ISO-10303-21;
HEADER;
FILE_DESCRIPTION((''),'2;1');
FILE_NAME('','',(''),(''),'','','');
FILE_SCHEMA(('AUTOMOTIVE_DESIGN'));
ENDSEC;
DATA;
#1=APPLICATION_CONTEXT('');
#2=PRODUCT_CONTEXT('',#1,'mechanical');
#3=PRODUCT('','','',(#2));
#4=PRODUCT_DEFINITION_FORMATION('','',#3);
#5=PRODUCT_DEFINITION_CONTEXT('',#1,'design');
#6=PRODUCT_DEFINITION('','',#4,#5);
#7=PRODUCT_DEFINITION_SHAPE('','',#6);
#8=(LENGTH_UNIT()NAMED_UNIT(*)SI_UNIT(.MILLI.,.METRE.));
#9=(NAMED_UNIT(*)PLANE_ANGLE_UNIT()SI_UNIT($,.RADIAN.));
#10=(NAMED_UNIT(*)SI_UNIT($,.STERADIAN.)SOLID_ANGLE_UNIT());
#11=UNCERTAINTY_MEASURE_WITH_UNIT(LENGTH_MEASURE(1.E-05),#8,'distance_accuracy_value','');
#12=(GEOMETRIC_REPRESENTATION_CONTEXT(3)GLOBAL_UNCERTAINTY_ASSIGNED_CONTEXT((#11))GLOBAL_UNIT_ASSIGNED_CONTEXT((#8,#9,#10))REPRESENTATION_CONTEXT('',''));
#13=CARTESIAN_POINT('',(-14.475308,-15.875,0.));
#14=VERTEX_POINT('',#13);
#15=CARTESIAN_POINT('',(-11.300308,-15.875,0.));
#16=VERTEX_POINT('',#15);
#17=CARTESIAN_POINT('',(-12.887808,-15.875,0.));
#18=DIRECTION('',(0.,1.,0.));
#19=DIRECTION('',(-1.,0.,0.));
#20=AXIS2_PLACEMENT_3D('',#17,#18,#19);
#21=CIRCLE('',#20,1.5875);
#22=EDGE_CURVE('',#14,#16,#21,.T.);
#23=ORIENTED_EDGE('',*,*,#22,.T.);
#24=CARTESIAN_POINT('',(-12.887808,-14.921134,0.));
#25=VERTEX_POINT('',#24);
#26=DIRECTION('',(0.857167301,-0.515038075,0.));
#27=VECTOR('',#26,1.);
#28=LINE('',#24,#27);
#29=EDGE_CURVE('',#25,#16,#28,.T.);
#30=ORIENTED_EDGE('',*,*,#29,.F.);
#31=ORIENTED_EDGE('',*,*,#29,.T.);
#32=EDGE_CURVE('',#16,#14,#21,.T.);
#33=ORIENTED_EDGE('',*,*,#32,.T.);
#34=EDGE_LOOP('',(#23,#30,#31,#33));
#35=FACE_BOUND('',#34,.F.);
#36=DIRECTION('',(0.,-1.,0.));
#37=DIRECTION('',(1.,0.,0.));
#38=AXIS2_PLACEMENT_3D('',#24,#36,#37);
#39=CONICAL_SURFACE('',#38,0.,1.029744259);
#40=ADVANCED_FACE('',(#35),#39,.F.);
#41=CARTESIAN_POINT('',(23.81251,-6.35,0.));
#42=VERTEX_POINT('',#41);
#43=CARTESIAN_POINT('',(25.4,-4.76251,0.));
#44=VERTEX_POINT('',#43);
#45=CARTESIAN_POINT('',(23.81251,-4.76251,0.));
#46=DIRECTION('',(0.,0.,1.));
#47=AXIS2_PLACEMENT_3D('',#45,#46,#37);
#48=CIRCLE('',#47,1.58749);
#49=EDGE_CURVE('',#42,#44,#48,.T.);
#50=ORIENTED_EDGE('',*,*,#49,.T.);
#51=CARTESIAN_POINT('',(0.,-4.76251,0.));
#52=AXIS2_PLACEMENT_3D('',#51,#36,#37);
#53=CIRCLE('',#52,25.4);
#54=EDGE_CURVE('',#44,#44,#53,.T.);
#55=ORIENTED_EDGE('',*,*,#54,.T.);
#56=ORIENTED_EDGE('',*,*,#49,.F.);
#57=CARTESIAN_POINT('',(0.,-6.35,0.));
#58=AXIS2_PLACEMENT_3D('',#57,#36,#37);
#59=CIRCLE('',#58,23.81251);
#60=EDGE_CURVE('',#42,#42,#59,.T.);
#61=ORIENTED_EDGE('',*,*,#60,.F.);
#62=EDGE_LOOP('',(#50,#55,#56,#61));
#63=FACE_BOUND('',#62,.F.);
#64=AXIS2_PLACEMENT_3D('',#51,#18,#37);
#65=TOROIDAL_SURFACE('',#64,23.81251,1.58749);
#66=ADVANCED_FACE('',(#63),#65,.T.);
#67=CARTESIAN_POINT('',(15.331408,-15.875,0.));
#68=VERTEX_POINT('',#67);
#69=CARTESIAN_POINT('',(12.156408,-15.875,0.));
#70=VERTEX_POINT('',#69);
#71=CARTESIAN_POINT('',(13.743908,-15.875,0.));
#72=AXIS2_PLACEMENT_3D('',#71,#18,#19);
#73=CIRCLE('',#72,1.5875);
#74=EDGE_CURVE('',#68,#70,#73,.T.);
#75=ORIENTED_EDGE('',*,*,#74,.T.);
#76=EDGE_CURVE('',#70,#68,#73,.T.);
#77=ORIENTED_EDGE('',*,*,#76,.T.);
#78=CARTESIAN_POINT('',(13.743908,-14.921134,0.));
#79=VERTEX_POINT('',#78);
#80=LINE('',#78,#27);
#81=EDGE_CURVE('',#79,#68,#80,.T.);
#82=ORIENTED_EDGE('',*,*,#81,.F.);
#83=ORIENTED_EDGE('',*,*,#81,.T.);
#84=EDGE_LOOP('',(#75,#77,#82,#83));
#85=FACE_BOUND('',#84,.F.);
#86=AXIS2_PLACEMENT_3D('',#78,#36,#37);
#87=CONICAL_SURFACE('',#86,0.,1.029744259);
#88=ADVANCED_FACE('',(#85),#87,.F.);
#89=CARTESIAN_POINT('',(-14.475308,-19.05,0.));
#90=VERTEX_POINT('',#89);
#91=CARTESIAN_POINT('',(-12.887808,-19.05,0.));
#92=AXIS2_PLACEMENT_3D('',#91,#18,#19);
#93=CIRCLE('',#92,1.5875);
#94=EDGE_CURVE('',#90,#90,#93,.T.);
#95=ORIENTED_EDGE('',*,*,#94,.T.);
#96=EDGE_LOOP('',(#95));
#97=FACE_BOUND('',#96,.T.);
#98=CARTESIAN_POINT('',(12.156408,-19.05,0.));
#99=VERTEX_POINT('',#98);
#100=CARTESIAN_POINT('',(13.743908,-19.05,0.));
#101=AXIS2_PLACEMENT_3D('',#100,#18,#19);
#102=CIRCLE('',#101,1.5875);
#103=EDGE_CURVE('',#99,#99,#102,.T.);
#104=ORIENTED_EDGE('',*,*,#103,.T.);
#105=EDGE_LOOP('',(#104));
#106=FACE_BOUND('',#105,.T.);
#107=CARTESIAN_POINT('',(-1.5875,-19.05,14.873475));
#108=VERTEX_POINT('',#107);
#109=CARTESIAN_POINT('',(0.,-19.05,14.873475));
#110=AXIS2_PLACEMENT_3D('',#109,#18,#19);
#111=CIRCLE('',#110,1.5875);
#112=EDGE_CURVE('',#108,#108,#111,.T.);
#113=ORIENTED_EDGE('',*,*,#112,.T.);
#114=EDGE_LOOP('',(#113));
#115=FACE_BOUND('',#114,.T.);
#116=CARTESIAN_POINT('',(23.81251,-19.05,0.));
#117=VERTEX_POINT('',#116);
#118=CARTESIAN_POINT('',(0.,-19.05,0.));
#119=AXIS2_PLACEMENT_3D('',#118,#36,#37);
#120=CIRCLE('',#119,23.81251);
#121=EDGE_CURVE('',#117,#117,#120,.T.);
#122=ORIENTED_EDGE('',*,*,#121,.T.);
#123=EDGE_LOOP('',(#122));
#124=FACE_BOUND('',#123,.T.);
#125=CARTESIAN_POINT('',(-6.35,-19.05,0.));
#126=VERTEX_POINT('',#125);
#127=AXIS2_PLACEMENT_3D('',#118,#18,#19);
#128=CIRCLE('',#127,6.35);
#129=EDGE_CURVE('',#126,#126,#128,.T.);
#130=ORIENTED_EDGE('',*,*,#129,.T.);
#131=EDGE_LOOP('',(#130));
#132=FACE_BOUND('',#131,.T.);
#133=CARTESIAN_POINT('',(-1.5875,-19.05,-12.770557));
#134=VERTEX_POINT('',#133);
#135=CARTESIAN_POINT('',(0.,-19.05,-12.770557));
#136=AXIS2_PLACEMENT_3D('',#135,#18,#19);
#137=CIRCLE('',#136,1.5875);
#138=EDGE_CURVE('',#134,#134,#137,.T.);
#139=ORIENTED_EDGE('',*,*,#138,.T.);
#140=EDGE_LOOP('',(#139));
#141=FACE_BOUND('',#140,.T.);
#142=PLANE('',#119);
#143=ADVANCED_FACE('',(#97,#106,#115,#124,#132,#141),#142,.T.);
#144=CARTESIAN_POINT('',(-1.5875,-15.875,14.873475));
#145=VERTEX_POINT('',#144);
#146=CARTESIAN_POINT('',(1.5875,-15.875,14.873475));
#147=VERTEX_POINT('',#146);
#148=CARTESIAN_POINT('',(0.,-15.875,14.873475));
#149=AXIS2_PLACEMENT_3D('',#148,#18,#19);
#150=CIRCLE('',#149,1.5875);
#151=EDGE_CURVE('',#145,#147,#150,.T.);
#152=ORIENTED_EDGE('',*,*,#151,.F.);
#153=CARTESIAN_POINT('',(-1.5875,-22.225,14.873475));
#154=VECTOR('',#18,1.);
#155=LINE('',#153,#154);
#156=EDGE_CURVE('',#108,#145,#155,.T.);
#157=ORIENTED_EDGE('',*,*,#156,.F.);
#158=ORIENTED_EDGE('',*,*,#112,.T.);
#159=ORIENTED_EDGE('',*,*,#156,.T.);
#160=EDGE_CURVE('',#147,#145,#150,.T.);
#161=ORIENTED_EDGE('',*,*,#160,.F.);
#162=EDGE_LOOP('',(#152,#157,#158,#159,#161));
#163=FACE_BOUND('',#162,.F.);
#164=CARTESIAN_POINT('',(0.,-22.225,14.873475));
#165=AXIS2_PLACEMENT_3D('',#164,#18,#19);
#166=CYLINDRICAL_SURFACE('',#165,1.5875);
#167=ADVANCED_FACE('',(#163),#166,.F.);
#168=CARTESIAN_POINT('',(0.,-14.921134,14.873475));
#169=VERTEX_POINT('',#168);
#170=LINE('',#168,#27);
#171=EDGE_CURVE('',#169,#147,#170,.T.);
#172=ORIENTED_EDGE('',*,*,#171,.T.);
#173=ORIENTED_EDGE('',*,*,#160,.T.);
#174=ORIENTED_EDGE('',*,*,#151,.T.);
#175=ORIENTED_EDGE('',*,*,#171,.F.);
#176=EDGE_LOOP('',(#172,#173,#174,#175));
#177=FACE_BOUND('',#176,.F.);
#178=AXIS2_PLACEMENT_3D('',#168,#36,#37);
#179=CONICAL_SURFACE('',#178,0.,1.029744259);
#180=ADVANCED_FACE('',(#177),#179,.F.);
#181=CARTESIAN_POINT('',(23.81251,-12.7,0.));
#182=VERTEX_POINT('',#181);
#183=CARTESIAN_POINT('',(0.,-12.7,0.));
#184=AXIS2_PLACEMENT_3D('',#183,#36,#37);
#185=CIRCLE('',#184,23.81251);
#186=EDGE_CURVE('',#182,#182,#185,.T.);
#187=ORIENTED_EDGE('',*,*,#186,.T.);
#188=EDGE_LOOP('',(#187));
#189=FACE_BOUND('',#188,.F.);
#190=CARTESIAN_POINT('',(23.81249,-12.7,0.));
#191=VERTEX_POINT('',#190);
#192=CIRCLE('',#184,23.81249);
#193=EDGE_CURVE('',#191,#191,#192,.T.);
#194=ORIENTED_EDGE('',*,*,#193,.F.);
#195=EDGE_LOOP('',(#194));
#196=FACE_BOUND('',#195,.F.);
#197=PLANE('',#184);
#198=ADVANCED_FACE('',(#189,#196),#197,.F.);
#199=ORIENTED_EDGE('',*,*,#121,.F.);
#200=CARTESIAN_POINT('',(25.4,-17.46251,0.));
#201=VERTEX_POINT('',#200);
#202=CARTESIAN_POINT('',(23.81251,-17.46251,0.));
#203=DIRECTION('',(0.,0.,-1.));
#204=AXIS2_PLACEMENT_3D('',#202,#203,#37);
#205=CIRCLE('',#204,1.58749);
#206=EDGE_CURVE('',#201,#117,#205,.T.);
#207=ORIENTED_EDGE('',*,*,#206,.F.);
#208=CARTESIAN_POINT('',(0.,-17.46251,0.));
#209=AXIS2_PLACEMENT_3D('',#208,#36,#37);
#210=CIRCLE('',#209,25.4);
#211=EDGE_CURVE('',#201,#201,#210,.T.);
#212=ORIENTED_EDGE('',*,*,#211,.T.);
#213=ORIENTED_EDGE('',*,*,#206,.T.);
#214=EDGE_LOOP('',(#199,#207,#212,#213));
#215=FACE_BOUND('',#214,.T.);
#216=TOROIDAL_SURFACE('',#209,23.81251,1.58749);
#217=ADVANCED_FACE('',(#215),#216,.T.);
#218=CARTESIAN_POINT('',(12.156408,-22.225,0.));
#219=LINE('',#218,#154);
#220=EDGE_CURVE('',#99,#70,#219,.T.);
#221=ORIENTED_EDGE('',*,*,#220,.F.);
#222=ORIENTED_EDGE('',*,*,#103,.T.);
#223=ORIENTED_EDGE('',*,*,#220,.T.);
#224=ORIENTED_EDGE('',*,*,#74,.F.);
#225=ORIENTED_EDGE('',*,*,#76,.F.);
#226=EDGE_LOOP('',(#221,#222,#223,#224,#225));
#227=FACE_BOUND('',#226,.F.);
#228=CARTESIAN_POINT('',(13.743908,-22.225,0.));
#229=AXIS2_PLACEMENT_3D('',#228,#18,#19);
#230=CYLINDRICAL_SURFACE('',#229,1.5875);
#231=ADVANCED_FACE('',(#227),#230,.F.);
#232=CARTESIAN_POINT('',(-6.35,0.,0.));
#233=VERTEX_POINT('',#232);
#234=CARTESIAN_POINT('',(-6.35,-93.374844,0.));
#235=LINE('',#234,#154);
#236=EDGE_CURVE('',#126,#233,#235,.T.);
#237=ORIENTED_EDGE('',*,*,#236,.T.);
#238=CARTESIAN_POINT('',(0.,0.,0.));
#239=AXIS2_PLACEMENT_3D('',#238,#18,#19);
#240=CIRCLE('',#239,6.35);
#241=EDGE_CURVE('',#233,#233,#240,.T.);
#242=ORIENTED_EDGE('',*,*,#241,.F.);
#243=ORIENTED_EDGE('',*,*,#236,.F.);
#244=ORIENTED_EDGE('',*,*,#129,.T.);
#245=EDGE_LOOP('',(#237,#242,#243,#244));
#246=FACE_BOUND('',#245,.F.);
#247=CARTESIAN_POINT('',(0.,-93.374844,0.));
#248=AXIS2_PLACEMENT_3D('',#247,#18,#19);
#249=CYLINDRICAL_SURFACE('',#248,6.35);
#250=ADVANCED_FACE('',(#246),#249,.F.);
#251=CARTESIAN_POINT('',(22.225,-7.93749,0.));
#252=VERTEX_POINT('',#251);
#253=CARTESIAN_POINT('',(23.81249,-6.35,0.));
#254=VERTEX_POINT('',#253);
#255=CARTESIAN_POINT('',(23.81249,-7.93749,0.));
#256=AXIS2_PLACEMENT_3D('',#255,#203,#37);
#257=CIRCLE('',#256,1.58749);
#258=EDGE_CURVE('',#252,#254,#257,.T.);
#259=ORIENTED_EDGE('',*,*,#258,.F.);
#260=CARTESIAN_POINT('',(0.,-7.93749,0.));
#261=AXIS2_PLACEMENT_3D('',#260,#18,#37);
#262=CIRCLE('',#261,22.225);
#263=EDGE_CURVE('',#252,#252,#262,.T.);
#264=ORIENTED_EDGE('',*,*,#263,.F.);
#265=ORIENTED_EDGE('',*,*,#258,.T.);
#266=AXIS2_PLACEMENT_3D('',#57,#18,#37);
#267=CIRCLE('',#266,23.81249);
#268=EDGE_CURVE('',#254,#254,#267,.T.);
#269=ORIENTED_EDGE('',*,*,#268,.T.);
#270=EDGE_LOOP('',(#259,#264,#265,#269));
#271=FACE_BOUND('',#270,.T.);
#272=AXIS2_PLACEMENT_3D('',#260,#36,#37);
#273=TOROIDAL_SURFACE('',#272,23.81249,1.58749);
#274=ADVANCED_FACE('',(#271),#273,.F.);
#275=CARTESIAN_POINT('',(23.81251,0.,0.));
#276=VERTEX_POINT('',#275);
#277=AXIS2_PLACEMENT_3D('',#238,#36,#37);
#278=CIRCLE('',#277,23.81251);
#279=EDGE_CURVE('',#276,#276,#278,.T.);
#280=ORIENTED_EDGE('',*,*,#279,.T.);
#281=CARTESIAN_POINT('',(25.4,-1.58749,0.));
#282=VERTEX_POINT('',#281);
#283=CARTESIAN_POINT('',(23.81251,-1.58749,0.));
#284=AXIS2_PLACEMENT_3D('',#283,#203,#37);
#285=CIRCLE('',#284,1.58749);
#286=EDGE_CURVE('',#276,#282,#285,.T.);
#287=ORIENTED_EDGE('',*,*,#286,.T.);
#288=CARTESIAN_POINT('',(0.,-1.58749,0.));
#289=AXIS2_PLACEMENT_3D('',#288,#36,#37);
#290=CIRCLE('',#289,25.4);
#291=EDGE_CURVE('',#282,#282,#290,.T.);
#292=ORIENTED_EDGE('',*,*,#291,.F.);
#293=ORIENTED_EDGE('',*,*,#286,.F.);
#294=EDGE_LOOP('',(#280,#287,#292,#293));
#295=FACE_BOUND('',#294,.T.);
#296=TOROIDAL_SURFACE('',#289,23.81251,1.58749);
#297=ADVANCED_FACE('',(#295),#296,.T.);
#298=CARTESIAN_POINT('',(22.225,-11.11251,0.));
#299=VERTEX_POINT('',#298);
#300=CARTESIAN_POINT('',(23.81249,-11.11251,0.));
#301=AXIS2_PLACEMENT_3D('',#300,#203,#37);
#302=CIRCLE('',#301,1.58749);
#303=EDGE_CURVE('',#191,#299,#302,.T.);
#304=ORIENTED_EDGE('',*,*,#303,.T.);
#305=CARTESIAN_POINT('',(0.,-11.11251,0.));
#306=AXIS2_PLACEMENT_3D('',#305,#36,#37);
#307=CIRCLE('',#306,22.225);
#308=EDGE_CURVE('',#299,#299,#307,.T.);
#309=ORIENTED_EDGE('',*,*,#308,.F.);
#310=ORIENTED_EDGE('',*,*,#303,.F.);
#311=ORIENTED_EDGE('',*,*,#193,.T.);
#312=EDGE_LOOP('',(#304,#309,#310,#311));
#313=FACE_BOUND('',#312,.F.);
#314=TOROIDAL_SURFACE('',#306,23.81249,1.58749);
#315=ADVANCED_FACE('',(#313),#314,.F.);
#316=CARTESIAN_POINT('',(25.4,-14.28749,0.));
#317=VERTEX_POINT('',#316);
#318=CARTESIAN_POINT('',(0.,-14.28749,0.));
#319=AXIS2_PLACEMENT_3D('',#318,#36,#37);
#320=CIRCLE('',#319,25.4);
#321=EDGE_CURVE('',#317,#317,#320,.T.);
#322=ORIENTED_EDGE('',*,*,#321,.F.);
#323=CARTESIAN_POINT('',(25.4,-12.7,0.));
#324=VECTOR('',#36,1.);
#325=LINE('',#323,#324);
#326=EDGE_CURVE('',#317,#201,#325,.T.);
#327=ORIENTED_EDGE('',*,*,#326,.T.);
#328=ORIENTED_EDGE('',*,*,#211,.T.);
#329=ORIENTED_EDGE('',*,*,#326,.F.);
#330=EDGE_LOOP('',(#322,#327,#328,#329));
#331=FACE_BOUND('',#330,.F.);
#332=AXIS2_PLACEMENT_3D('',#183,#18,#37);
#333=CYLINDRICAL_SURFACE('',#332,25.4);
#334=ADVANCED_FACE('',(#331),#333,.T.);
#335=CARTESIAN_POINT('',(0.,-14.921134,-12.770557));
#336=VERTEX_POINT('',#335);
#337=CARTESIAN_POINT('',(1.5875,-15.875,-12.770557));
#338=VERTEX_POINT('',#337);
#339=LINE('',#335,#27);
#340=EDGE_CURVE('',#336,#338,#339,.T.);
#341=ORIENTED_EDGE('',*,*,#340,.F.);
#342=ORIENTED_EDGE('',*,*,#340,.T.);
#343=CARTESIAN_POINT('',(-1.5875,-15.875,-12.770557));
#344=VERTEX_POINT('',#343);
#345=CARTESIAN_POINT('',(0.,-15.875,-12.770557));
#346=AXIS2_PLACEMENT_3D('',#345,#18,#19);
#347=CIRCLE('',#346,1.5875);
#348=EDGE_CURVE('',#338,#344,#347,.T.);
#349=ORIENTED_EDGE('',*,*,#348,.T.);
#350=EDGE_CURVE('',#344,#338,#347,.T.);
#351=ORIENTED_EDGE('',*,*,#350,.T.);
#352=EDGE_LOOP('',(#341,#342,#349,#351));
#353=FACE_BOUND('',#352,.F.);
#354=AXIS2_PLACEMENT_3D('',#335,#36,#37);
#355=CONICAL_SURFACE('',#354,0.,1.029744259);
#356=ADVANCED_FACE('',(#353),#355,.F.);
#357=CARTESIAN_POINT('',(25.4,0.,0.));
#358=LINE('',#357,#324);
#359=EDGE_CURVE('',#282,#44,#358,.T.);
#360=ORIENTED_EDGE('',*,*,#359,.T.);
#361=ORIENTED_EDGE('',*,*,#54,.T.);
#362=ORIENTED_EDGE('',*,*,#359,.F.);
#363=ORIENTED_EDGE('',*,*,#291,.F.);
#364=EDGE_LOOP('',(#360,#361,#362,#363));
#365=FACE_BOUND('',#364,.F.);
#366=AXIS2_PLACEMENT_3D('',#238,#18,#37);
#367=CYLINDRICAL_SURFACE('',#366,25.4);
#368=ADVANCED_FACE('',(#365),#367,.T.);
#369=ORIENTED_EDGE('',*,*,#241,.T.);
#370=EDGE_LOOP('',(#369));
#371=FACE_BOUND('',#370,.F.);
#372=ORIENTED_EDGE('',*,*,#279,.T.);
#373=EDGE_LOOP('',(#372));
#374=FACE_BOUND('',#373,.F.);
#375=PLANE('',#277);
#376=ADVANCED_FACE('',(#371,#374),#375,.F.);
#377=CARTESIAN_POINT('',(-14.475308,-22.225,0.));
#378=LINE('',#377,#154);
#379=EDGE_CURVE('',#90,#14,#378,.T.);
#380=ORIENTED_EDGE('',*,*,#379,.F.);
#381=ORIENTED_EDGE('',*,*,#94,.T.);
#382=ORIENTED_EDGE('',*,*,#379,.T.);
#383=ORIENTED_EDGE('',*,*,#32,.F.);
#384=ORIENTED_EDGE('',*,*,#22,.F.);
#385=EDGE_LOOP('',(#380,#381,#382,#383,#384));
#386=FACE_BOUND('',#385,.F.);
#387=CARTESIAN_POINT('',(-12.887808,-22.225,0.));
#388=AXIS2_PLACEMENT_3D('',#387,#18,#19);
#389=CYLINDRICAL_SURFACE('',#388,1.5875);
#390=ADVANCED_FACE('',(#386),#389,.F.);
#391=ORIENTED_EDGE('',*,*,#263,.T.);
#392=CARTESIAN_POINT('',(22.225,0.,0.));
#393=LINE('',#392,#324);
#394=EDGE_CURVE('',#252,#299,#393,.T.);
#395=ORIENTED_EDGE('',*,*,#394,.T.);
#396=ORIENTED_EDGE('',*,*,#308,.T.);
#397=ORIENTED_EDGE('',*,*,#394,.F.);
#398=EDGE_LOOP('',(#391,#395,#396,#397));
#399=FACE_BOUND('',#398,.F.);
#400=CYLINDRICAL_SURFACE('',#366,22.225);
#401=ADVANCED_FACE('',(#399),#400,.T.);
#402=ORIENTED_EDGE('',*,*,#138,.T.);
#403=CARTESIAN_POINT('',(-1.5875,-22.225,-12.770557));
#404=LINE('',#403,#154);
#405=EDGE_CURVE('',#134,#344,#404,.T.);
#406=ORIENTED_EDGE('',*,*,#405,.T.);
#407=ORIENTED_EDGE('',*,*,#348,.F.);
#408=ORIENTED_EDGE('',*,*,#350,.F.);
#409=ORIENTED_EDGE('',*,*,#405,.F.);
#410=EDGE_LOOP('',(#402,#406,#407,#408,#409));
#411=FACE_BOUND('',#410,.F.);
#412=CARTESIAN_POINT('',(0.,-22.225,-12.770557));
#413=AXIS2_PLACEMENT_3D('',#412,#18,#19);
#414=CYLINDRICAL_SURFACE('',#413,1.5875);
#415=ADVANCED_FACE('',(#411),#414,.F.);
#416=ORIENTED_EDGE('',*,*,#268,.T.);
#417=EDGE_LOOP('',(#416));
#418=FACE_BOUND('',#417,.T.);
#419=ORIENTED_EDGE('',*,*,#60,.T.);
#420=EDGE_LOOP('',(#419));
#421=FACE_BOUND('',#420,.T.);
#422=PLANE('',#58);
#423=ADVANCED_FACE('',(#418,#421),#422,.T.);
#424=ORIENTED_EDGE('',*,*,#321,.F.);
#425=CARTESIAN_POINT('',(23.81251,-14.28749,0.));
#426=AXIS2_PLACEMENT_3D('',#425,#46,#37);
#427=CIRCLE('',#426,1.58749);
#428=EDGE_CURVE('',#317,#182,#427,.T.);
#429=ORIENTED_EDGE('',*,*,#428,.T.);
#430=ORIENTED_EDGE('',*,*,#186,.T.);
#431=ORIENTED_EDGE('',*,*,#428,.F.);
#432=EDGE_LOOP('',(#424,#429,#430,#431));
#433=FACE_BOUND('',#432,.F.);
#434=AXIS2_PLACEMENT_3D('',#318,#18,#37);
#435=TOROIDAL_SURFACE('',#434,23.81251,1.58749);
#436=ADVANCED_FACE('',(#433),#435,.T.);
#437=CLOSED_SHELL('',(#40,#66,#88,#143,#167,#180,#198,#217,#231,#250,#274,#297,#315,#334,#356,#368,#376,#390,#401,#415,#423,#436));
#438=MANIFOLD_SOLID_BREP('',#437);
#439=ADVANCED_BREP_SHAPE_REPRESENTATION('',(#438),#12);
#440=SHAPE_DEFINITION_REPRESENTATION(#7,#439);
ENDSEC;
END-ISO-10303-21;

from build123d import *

# Parameters (mm, degrees)
F0_R     = 25.4
F1_DEPTH = 6.35
F2_R     = 22.225
F3_DEPTH = 12.7
F4_R     = 25.4
F4_R_2   = 22.225
F5_DEPTH = 6.35
F7_D     = 3.175
F7_DEPTH = 3.175
F7_TIP   = 0.9538662327
F8_D     = 12.7
F9_R     = 1.58749


# Not quite as in the source:
# - a fillet or chamfer is up to 0.001 mm smaller than in the source, because OpenCascade refuses the exact size


with BuildPart() as f1:
    # F0 (on Front) → F1 (new body)
    with BuildSketch(Plane.XZ):
        Circle(F0_R)
    extrude(amount=F1_DEPTH)

    # F2 (on Front) → F3 (join)
    with BuildSketch(Plane.XZ):
        Circle(F2_R)
    extrude(amount=F3_DEPTH)

    # F4 (on face) → F5 (join)
    with BuildSketch(Plane.XZ.offset(12.7)):
        Circle(F4_R)
        Circle(F4_R_2, mode=Mode.SUBTRACT)
        Circle(F4_R_2)
    extrude(amount=F5_DEPTH)

    # F7
    with Locations(Plane.XZ.offset(19.05)):
        with Locations((0, 14.8734748363), (13.7439081445, 0), (0, -12.7705568448), (-12.8878084943, 0)):
            Hole(F7_D / 2, depth=F7_DEPTH)
            with Locations((0, 0, -(F7_DEPTH + F7_TIP / 2))):  # 118° drill point
                Cone(0, F7_D / 2, F7_TIP, mode=Mode.SUBTRACT)

    # F8 (through all)
    with Locations(Plane.XZ.offset(19.05)):
        with Locations((0, 0)):
            Hole(F8_D / 2)

    # F9 (radius 1.5875 in the source; OpenCascade refuses exactly that, so slightly less here)
    f9_edges = [f1.edges().sort_by_distance(p)[0] for p in [
        (-25.4, 0, 0),
        (-25.4, -6.35, 0),
        (-22.225, -6.35, 0),
        (-22.225, -12.7, 0),
        (-25.4, -12.7, 0),
        (-25.4, -19.05, 0),
    ]]
    fillet(f9_edges, radius=F9_R)


solid = f1.part
